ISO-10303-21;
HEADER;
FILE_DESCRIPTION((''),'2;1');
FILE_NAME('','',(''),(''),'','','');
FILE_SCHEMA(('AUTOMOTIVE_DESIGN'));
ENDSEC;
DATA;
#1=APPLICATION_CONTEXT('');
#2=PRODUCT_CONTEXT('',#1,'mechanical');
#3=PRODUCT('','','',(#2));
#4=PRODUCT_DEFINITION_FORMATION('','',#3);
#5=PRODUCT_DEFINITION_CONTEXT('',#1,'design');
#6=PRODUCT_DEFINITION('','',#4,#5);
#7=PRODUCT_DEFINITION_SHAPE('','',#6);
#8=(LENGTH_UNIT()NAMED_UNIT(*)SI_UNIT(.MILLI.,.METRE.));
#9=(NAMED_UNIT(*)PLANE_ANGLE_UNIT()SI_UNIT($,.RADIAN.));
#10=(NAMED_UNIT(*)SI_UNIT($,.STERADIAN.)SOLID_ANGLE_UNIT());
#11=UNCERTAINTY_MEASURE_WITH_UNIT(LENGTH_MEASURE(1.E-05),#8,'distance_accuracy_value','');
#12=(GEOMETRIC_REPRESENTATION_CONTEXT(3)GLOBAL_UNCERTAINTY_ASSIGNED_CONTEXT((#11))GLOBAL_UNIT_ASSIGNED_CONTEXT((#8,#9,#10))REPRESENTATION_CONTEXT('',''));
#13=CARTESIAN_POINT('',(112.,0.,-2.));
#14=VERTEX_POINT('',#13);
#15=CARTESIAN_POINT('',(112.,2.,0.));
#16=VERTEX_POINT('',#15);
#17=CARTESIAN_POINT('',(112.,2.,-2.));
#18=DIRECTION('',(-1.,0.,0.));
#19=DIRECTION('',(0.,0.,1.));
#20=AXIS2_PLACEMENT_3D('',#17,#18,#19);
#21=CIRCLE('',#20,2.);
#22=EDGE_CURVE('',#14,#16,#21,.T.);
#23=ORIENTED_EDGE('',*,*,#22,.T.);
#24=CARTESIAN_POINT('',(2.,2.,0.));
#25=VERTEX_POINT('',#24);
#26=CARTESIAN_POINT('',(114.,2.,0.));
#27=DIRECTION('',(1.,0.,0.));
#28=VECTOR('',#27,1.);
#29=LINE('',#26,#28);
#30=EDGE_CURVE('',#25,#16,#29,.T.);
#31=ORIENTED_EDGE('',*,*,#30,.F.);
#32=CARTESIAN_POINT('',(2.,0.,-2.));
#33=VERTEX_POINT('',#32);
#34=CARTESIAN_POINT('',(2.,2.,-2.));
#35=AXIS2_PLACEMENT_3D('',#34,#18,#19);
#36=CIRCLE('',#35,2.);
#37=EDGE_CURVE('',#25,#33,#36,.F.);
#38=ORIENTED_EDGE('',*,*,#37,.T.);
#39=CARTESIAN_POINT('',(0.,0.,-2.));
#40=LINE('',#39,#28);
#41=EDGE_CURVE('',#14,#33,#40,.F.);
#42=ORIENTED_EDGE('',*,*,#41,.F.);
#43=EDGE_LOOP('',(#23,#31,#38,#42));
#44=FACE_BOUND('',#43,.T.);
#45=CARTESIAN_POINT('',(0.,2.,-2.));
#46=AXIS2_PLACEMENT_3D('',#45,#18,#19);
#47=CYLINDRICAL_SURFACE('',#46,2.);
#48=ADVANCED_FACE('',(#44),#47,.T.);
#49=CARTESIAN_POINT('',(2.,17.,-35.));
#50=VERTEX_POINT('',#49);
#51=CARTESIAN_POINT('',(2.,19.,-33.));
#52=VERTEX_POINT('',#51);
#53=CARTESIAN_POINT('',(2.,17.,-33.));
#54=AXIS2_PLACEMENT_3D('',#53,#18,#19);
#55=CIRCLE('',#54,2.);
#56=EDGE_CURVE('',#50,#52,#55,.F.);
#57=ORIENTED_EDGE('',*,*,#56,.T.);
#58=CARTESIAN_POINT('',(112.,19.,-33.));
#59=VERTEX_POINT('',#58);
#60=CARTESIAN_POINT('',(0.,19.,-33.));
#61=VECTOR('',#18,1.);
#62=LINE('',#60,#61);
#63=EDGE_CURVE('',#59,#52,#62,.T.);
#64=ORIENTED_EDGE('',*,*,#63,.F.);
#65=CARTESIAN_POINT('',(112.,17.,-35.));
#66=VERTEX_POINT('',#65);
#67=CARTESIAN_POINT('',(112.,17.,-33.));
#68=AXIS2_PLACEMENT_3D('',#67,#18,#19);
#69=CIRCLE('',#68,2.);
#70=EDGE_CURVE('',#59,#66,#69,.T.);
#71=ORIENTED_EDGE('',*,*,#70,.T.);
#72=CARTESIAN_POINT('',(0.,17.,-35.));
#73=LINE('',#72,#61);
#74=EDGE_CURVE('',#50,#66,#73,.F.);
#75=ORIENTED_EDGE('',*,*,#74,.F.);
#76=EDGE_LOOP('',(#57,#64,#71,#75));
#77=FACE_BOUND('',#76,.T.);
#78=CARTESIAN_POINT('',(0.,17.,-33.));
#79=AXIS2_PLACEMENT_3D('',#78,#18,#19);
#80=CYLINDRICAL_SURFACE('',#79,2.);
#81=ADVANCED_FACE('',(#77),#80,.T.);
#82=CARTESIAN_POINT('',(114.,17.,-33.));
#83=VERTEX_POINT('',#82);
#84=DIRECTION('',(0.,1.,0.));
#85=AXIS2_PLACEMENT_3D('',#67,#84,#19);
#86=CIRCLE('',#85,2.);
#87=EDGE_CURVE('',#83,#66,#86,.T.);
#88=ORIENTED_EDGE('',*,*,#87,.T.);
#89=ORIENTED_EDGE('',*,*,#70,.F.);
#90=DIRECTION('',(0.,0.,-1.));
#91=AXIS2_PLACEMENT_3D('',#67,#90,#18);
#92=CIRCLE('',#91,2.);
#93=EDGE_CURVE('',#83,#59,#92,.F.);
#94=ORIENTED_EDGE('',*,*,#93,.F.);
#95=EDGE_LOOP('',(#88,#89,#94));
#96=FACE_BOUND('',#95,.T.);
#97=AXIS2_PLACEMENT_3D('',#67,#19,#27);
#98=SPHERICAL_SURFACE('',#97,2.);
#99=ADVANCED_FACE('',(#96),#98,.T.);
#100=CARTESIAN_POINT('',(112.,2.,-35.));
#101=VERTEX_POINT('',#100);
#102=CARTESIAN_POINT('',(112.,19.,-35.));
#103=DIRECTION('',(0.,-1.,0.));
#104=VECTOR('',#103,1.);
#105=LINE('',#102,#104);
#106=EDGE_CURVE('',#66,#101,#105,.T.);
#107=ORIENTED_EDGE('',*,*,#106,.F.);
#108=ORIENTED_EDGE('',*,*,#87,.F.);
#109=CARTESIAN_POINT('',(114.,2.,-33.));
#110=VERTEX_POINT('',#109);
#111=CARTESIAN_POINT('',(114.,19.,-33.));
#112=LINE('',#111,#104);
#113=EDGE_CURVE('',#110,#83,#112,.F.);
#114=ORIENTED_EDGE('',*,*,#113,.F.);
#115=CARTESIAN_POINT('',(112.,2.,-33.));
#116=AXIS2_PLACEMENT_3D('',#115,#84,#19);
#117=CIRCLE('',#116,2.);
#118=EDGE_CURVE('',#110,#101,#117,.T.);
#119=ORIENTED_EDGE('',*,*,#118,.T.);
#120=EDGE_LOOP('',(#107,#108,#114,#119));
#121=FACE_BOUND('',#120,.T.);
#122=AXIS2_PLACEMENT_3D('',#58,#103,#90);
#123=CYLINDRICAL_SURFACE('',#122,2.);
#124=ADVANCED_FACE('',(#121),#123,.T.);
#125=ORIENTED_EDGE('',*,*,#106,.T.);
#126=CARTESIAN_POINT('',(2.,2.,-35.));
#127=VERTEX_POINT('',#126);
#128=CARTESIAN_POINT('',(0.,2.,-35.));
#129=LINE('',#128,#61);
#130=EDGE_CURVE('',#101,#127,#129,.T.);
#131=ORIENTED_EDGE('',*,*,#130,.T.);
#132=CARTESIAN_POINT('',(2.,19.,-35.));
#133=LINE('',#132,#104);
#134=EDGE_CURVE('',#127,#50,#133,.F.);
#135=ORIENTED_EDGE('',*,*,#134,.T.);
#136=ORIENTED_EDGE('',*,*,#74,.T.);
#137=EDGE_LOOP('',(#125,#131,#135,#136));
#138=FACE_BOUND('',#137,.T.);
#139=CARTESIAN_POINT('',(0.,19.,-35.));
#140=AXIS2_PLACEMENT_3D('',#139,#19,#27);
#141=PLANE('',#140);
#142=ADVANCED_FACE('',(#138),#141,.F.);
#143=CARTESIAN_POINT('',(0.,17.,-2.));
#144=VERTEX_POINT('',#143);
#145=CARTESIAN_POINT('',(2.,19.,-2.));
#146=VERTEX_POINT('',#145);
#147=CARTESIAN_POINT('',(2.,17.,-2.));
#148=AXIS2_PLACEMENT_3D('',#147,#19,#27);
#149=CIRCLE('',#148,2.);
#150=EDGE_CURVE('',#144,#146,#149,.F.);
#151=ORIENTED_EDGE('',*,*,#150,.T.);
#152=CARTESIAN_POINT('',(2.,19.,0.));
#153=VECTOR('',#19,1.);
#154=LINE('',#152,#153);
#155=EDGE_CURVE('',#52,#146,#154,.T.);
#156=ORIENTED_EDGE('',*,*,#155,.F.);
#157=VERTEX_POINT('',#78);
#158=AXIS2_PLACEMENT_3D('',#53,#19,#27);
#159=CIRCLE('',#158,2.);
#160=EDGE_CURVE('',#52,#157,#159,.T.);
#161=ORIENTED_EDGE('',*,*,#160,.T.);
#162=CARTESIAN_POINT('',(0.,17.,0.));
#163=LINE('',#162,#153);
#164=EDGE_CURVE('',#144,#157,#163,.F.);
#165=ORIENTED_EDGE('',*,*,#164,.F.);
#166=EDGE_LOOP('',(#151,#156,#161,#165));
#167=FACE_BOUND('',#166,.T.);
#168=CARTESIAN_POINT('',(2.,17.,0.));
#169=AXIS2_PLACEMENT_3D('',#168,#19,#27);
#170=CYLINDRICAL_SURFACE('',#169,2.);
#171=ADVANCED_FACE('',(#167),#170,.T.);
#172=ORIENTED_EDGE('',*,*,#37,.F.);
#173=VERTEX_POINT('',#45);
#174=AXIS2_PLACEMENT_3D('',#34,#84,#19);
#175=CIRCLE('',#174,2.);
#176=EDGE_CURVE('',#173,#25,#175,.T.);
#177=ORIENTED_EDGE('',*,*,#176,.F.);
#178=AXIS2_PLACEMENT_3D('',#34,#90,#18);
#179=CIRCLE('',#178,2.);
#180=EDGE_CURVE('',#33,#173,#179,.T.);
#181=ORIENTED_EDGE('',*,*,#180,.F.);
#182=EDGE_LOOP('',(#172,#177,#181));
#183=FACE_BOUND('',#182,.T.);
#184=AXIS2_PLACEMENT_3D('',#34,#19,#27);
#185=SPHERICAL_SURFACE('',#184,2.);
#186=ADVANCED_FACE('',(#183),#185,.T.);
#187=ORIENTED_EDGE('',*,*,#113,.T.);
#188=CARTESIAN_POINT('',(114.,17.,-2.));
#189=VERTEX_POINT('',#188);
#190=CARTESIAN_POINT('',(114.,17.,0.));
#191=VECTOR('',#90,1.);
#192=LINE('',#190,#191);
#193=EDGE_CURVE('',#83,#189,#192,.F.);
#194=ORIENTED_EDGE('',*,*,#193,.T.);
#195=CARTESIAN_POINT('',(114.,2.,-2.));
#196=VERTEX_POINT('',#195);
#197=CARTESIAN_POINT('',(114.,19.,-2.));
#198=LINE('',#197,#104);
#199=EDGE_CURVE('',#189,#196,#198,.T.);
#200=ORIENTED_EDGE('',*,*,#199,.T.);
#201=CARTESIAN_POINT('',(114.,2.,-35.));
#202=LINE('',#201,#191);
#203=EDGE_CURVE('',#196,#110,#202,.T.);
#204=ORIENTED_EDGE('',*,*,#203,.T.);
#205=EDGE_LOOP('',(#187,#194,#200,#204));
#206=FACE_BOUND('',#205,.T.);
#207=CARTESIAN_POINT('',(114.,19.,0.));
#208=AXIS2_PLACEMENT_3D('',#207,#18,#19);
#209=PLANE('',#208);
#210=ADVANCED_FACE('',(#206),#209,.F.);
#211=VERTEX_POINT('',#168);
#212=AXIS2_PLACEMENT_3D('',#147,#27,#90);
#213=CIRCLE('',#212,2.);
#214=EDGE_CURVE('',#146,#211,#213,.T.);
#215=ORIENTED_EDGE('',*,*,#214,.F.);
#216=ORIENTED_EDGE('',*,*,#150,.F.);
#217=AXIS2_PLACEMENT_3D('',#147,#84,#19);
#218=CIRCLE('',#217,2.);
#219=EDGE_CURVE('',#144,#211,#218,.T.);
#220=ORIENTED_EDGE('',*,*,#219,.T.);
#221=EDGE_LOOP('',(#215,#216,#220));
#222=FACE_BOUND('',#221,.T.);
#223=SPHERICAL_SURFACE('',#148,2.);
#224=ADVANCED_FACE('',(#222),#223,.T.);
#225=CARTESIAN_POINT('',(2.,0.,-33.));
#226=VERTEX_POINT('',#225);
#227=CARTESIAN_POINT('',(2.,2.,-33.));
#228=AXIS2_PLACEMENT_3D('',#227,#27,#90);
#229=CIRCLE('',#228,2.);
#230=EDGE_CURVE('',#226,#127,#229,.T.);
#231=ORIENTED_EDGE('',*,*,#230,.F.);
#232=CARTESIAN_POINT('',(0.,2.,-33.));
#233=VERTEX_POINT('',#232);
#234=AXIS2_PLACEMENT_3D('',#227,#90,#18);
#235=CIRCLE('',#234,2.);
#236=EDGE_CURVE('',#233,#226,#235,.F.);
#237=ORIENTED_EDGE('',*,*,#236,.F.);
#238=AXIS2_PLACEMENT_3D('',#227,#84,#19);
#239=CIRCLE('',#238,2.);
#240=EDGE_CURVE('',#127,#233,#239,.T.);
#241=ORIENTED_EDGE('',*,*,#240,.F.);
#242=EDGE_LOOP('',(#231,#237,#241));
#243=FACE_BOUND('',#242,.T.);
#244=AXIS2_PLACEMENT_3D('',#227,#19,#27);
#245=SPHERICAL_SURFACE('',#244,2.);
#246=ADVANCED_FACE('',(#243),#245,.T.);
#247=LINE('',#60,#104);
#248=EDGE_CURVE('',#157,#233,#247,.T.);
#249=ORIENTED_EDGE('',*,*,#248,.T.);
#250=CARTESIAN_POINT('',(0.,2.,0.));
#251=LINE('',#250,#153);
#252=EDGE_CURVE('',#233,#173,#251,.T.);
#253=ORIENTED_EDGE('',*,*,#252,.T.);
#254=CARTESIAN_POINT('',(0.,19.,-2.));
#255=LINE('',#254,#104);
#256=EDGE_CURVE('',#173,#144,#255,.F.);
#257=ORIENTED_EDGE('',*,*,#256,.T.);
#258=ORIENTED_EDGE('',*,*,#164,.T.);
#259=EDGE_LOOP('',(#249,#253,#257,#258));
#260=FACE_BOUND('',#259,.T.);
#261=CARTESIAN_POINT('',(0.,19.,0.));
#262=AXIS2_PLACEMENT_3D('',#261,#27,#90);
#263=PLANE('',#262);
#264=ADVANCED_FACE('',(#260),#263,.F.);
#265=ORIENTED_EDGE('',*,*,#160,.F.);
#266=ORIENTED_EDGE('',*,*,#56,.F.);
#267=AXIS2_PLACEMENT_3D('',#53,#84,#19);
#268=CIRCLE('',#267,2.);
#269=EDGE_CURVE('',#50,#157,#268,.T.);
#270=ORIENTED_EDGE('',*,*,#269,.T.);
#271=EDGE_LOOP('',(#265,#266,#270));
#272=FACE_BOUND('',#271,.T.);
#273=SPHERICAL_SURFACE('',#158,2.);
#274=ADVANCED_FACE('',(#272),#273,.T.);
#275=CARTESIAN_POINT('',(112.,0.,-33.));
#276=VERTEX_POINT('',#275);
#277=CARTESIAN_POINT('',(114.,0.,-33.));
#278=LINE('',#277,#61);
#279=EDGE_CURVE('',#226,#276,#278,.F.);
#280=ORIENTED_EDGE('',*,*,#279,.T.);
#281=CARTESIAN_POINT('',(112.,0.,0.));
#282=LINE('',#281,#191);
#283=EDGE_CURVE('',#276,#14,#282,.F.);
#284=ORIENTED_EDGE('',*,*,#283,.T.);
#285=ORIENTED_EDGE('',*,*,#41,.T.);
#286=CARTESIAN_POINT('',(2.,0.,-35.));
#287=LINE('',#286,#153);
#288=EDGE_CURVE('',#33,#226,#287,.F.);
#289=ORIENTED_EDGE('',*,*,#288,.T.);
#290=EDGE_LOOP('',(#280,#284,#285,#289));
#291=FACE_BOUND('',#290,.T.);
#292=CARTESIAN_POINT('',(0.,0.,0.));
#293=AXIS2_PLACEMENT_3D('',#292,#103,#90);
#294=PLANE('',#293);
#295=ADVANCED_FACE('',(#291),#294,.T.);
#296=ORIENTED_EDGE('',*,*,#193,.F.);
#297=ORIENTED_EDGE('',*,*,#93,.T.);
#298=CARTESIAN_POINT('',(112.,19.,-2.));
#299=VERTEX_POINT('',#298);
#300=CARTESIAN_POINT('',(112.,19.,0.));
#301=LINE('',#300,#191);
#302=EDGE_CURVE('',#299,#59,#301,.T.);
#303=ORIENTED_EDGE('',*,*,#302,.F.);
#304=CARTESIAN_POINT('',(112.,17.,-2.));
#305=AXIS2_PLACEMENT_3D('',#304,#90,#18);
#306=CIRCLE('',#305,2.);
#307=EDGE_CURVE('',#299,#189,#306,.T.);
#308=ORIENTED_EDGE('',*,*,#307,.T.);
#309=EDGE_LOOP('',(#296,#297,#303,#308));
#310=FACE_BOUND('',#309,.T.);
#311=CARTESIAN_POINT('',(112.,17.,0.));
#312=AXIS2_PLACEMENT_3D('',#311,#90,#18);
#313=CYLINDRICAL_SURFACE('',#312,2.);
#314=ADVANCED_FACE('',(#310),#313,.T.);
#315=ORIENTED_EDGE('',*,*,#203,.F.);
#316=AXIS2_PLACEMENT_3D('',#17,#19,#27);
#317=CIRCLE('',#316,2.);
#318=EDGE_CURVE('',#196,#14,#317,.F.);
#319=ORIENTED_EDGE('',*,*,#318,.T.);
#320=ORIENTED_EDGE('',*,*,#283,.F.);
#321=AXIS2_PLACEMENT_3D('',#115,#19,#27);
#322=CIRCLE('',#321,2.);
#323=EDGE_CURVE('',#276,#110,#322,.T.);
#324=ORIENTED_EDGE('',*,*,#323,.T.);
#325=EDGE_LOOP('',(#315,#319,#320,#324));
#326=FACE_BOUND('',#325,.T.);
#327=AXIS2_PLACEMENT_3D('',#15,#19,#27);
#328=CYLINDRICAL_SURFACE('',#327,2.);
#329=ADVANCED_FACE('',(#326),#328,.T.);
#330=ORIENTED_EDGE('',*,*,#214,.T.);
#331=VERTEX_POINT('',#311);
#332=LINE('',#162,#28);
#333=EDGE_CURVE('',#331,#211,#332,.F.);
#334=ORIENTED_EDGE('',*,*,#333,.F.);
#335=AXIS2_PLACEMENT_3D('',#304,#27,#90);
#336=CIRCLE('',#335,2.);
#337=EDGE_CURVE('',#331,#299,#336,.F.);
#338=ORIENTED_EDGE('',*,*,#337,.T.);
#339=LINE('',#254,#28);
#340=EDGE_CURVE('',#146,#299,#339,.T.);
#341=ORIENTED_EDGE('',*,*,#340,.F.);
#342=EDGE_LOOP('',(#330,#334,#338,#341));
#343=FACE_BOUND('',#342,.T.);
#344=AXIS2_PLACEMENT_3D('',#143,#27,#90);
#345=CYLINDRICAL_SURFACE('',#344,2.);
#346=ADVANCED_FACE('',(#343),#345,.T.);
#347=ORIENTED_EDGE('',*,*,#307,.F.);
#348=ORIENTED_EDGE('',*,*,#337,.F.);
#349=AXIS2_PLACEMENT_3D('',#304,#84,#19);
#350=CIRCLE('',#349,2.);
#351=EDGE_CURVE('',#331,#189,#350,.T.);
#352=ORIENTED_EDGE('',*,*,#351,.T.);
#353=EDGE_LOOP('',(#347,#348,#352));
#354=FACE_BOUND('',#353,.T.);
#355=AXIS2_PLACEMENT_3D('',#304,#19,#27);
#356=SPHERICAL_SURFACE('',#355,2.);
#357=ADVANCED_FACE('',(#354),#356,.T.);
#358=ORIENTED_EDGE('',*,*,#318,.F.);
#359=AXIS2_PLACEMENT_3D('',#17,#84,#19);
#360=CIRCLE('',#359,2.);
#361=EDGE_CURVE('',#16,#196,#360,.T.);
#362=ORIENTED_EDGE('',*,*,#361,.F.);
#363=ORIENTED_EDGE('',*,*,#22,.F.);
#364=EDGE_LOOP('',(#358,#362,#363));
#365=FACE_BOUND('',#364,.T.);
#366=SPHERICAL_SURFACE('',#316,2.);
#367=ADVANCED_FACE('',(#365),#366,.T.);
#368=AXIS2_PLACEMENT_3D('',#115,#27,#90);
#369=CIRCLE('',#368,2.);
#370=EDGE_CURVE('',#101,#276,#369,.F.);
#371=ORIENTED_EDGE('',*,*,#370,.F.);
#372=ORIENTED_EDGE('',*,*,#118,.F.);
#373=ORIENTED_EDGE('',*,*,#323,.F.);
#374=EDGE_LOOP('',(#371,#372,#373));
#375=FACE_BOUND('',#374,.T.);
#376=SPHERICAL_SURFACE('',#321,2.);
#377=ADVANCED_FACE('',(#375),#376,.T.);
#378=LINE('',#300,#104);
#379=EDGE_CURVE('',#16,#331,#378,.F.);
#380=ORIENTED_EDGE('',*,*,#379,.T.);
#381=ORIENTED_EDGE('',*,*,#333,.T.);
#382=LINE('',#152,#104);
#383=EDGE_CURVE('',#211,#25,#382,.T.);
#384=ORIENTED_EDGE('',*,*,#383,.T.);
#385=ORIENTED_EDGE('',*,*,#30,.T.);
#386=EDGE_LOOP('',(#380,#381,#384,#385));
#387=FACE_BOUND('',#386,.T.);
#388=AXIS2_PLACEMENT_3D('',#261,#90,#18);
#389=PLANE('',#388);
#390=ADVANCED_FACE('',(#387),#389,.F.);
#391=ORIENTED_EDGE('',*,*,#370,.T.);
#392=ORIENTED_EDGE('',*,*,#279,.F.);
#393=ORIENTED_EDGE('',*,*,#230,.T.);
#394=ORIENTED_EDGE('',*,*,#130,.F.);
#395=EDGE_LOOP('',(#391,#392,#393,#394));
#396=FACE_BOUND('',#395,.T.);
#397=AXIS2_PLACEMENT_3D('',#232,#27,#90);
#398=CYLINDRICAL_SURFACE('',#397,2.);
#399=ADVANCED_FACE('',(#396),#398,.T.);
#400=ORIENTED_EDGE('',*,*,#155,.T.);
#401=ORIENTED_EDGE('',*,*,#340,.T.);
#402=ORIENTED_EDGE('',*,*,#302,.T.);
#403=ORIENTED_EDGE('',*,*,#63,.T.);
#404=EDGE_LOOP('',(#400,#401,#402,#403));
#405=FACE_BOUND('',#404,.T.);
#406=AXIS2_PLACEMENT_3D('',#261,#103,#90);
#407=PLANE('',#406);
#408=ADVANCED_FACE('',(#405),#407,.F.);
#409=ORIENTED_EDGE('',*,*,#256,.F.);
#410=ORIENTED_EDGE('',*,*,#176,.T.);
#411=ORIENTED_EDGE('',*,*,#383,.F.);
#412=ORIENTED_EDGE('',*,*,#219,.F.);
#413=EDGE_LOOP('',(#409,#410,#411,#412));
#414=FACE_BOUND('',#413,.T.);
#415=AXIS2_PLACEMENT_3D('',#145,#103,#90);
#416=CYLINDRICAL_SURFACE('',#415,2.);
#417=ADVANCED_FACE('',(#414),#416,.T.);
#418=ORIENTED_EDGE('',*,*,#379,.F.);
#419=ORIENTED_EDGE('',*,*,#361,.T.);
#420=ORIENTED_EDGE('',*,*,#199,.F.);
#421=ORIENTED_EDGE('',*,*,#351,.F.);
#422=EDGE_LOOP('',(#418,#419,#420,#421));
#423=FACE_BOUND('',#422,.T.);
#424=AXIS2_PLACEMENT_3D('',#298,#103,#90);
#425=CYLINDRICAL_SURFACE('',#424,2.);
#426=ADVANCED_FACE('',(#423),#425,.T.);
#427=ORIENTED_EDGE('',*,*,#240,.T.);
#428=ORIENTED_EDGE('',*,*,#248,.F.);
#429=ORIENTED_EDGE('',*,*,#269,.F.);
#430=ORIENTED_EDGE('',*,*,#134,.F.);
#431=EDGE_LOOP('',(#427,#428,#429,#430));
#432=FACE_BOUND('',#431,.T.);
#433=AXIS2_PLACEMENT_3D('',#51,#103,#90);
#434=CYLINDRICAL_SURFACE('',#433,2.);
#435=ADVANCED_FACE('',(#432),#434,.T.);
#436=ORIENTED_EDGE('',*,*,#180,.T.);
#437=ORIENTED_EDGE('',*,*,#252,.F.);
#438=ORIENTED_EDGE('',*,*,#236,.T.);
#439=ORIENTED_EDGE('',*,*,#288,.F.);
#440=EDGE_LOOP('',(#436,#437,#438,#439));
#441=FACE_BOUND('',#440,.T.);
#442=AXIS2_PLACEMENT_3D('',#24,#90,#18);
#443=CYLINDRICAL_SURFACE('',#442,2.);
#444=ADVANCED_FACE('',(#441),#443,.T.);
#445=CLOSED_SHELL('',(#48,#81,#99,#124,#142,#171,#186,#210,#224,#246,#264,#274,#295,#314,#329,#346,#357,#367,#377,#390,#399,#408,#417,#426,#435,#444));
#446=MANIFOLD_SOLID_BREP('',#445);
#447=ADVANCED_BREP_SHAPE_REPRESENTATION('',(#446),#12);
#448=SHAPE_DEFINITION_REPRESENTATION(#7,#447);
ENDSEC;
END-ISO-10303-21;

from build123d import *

# Parameters (mm, degrees)
ESBO_O1_W                = 114
ESBO_O1_H                = 35
RESSALTO_EXTRUS_O1_DEPTH = 19
FILETE1_R                = 2
FILETE2_R                = 2


with BuildPart() as part:
    # Esboço1 → Ressalto-extrusão1 (new body)
    with BuildSketch(Plane(origin=(0, 0, 0), x_dir=(1, 0, 0), z_dir=(0, 1, 0))):
        with Locations((57, 17.5)):
            Rectangle(ESBO_O1_W, ESBO_O1_H)
    extrude(amount=RESSALTO_EXTRUS_O1_DEPTH)

    # Filete1
    filete1_edges = [part.edges().sort_by_distance(p)[0] for p in [
        (114, 19, -17.5),
        (57, 19, -35),
        (0, 19, -17.5),
        (57, 0, -35),
        (114, 0, -17.5),
        (57, 0, 0),
        (0, 0, -17.5),
        (57, 19, 0),
    ]]
    fillet(filete1_edges, radius=FILETE1_R)

    # Filete2
    # the kernel refuses this fillet: 2 mm, written as the material it takes off along each edge
    with BuildSketch(Plane(origin=(2, 2, -33), x_dir=(0, 0, -1), z_dir=(-1, 0, 0))) as filete2_piece_1_section:
        Polygon((0, 0), (FILETE2_R, 0), (FILETE2_R, FILETE2_R), (0, FILETE2_R), align=None)
    filete2_piece_1 = extrude(amount=FILETE2_R, mode=Mode.PRIVATE)
    filete2_piece_1 = filete2_piece_1 - Plane(origin=(2, 2, -33), x_dir=(0, 0.7071067811865475, 0.7071067811865475), z_dir=(-1, 0, 0)) * Sphere(FILETE2_R, mode=Mode.PRIVATE)
    add(filete2_piece_1, mode=Mode.SUBTRACT)
    with BuildSketch(Plane(origin=(112, 2, -33), x_dir=(0, 0, -1), z_dir=(1, 0, 0))) as filete2_piece_2_section:
        Polygon((0, 0), (FILETE2_R, 0), (FILETE2_R, -FILETE2_R), (0, -FILETE2_R), align=None)
    filete2_piece_2 = extrude(amount=FILETE2_R, mode=Mode.PRIVATE)
    filete2_piece_2 = filete2_piece_2 - Plane(origin=(112, 2, -33), x_dir=(0, 0.7071067811865475, 0.7071067811865475), z_dir=(1, 0, 0)) * Sphere(FILETE2_R, mode=Mode.PRIVATE)
    add(filete2_piece_2, mode=Mode.SUBTRACT)
    with BuildSketch(Plane(origin=(2, 2, -2), x_dir=(-1, 0, 0), z_dir=(0, 0, 1))) as filete2_piece_3_section:
        Polygon((0, 0), (FILETE2_R, 0), (FILETE2_R, FILETE2_R), (0, FILETE2_R), align=None)
    filete2_piece_3 = extrude(amount=FILETE2_R, mode=Mode.PRIVATE)
    filete2_piece_3 = filete2_piece_3 - Plane(origin=(2, 2, -2), x_dir=(0.7071067811865475, 0.7071067811865475, 0), z_dir=(0, 0, 1)) * Sphere(FILETE2_R, mode=Mode.PRIVATE)
    add(filete2_piece_3, mode=Mode.SUBTRACT)
    with BuildSketch(Plane(origin=(112, 2, -2), x_dir=(1, 0, 0), z_dir=(0, 0, 1))) as filete2_piece_4_section:
        Polygon((0, 0), (FILETE2_R, 0), (FILETE2_R, -FILETE2_R), (0, -FILETE2_R), align=None)
    filete2_piece_4 = extrude(amount=FILETE2_R, mode=Mode.PRIVATE)
    filete2_piece_4 = filete2_piece_4 - Plane(origin=(112, 2, -2), x_dir=(-0.7071067811865475, 0.7071067811865475, 0), z_dir=(0, 0, 1)) * Sphere(FILETE2_R, mode=Mode.PRIVATE)
    add(filete2_piece_4, mode=Mode.SUBTRACT)
    with BuildSketch(Plane(origin=(112, 17, -2), x_dir=(1, 0, 0), z_dir=(0, 0, 1))) as filete2_piece_5_section:
        Polygon((0, 0), (FILETE2_R, 0), (FILETE2_R, FILETE2_R), (0, FILETE2_R), align=None)
    filete2_piece_5 = extrude(amount=FILETE2_R, mode=Mode.PRIVATE)
    filete2_piece_5 = filete2_piece_5 - Plane(origin=(112, 17, -2), x_dir=(-0.7071067811865475, -0.7071067811865475, 0), z_dir=(0, 0, 1)) * Sphere(FILETE2_R, mode=Mode.PRIVATE)
    add(filete2_piece_5, mode=Mode.SUBTRACT)
    with BuildSketch(Plane(origin=(2, 17, -2), x_dir=(-1, 0, 0), z_dir=(0, 0, 1))) as filete2_piece_6_section:
        Polygon((0, 0), (FILETE2_R, 0), (FILETE2_R, -FILETE2_R), (0, -FILETE2_R), align=None)
    filete2_piece_6 = extrude(amount=FILETE2_R, mode=Mode.PRIVATE)
    filete2_piece_6 = filete2_piece_6 - Plane(origin=(2, 17, -2), x_dir=(0.7071067811865475, -0.7071067811865475, 0), z_dir=(0, 0, 1)) * Sphere(FILETE2_R, mode=Mode.PRIVATE)
    add(filete2_piece_6, mode=Mode.SUBTRACT)
    with BuildSketch(Plane(origin=(112, 17, -33), x_dir=(0, 0, -1), z_dir=(1, 0, 0))) as filete2_piece_7_section:
        Polygon((0, 0), (FILETE2_R, 0), (FILETE2_R, FILETE2_R), (0, FILETE2_R), align=None)
    filete2_piece_7 = extrude(amount=FILETE2_R, mode=Mode.PRIVATE)
    filete2_piece_7 = filete2_piece_7 - Plane(origin=(112, 17, -33), x_dir=(0, -0.7071067811865475, 0.7071067811865475), z_dir=(1, 0, 0)) * Sphere(FILETE2_R, mode=Mode.PRIVATE)
    add(filete2_piece_7, mode=Mode.SUBTRACT)
    with BuildSketch(Plane(origin=(2, 17, -33), x_dir=(0, 0, -1), z_dir=(-1, 0, 0))) as filete2_piece_8_section:
        Polygon((0, 0), (FILETE2_R, 0), (FILETE2_R, -FILETE2_R), (0, -FILETE2_R), align=None)
    filete2_piece_8 = extrude(amount=FILETE2_R, mode=Mode.PRIVATE)
    filete2_piece_8 = filete2_piece_8 - Plane(origin=(2, 17, -33), x_dir=(0, -0.7071067811865475, 0.7071067811865475), z_dir=(-1, 0, 0)) * Sphere(FILETE2_R, mode=Mode.PRIVATE)
    add(filete2_piece_8, mode=Mode.SUBTRACT)
    with BuildSketch(Plane(origin=(114, 2, 0), x_dir=(-1, 0, 0), z_dir=(0, 1, 0)), Plane(origin=(114, 2, -35), x_dir=(0, 0, 1), z_dir=(0, 1, 0))) as filete2_piece_9:
        with BuildLine():
            CenterArc((FILETE2_R, -FILETE2_R), FILETE2_R, 90, 90)
            Line((0, -FILETE2_R), (0, 0))
            Line((0, 0), (FILETE2_R, 0))
        make_face()
    extrude(amount=15, mode=Mode.SUBTRACT)
    with BuildSketch(Plane(origin=(0, 2, 0), x_dir=(1, 0, 0), z_dir=(0, 1, 0)), Plane(origin=(0, 2, -35), x_dir=(0, 0, 1), z_dir=(0, 1, 0))) as filete2_piece_10:
        with BuildLine():
            CenterArc((FILETE2_R, FILETE2_R), FILETE2_R, 180, 90)
            Line((0, FILETE2_R), (0, 0))
            Line((0, 0), (FILETE2_R, 0))
        make_face()
    extrude(amount=15, mode=Mode.SUBTRACT)


solid = part.part
